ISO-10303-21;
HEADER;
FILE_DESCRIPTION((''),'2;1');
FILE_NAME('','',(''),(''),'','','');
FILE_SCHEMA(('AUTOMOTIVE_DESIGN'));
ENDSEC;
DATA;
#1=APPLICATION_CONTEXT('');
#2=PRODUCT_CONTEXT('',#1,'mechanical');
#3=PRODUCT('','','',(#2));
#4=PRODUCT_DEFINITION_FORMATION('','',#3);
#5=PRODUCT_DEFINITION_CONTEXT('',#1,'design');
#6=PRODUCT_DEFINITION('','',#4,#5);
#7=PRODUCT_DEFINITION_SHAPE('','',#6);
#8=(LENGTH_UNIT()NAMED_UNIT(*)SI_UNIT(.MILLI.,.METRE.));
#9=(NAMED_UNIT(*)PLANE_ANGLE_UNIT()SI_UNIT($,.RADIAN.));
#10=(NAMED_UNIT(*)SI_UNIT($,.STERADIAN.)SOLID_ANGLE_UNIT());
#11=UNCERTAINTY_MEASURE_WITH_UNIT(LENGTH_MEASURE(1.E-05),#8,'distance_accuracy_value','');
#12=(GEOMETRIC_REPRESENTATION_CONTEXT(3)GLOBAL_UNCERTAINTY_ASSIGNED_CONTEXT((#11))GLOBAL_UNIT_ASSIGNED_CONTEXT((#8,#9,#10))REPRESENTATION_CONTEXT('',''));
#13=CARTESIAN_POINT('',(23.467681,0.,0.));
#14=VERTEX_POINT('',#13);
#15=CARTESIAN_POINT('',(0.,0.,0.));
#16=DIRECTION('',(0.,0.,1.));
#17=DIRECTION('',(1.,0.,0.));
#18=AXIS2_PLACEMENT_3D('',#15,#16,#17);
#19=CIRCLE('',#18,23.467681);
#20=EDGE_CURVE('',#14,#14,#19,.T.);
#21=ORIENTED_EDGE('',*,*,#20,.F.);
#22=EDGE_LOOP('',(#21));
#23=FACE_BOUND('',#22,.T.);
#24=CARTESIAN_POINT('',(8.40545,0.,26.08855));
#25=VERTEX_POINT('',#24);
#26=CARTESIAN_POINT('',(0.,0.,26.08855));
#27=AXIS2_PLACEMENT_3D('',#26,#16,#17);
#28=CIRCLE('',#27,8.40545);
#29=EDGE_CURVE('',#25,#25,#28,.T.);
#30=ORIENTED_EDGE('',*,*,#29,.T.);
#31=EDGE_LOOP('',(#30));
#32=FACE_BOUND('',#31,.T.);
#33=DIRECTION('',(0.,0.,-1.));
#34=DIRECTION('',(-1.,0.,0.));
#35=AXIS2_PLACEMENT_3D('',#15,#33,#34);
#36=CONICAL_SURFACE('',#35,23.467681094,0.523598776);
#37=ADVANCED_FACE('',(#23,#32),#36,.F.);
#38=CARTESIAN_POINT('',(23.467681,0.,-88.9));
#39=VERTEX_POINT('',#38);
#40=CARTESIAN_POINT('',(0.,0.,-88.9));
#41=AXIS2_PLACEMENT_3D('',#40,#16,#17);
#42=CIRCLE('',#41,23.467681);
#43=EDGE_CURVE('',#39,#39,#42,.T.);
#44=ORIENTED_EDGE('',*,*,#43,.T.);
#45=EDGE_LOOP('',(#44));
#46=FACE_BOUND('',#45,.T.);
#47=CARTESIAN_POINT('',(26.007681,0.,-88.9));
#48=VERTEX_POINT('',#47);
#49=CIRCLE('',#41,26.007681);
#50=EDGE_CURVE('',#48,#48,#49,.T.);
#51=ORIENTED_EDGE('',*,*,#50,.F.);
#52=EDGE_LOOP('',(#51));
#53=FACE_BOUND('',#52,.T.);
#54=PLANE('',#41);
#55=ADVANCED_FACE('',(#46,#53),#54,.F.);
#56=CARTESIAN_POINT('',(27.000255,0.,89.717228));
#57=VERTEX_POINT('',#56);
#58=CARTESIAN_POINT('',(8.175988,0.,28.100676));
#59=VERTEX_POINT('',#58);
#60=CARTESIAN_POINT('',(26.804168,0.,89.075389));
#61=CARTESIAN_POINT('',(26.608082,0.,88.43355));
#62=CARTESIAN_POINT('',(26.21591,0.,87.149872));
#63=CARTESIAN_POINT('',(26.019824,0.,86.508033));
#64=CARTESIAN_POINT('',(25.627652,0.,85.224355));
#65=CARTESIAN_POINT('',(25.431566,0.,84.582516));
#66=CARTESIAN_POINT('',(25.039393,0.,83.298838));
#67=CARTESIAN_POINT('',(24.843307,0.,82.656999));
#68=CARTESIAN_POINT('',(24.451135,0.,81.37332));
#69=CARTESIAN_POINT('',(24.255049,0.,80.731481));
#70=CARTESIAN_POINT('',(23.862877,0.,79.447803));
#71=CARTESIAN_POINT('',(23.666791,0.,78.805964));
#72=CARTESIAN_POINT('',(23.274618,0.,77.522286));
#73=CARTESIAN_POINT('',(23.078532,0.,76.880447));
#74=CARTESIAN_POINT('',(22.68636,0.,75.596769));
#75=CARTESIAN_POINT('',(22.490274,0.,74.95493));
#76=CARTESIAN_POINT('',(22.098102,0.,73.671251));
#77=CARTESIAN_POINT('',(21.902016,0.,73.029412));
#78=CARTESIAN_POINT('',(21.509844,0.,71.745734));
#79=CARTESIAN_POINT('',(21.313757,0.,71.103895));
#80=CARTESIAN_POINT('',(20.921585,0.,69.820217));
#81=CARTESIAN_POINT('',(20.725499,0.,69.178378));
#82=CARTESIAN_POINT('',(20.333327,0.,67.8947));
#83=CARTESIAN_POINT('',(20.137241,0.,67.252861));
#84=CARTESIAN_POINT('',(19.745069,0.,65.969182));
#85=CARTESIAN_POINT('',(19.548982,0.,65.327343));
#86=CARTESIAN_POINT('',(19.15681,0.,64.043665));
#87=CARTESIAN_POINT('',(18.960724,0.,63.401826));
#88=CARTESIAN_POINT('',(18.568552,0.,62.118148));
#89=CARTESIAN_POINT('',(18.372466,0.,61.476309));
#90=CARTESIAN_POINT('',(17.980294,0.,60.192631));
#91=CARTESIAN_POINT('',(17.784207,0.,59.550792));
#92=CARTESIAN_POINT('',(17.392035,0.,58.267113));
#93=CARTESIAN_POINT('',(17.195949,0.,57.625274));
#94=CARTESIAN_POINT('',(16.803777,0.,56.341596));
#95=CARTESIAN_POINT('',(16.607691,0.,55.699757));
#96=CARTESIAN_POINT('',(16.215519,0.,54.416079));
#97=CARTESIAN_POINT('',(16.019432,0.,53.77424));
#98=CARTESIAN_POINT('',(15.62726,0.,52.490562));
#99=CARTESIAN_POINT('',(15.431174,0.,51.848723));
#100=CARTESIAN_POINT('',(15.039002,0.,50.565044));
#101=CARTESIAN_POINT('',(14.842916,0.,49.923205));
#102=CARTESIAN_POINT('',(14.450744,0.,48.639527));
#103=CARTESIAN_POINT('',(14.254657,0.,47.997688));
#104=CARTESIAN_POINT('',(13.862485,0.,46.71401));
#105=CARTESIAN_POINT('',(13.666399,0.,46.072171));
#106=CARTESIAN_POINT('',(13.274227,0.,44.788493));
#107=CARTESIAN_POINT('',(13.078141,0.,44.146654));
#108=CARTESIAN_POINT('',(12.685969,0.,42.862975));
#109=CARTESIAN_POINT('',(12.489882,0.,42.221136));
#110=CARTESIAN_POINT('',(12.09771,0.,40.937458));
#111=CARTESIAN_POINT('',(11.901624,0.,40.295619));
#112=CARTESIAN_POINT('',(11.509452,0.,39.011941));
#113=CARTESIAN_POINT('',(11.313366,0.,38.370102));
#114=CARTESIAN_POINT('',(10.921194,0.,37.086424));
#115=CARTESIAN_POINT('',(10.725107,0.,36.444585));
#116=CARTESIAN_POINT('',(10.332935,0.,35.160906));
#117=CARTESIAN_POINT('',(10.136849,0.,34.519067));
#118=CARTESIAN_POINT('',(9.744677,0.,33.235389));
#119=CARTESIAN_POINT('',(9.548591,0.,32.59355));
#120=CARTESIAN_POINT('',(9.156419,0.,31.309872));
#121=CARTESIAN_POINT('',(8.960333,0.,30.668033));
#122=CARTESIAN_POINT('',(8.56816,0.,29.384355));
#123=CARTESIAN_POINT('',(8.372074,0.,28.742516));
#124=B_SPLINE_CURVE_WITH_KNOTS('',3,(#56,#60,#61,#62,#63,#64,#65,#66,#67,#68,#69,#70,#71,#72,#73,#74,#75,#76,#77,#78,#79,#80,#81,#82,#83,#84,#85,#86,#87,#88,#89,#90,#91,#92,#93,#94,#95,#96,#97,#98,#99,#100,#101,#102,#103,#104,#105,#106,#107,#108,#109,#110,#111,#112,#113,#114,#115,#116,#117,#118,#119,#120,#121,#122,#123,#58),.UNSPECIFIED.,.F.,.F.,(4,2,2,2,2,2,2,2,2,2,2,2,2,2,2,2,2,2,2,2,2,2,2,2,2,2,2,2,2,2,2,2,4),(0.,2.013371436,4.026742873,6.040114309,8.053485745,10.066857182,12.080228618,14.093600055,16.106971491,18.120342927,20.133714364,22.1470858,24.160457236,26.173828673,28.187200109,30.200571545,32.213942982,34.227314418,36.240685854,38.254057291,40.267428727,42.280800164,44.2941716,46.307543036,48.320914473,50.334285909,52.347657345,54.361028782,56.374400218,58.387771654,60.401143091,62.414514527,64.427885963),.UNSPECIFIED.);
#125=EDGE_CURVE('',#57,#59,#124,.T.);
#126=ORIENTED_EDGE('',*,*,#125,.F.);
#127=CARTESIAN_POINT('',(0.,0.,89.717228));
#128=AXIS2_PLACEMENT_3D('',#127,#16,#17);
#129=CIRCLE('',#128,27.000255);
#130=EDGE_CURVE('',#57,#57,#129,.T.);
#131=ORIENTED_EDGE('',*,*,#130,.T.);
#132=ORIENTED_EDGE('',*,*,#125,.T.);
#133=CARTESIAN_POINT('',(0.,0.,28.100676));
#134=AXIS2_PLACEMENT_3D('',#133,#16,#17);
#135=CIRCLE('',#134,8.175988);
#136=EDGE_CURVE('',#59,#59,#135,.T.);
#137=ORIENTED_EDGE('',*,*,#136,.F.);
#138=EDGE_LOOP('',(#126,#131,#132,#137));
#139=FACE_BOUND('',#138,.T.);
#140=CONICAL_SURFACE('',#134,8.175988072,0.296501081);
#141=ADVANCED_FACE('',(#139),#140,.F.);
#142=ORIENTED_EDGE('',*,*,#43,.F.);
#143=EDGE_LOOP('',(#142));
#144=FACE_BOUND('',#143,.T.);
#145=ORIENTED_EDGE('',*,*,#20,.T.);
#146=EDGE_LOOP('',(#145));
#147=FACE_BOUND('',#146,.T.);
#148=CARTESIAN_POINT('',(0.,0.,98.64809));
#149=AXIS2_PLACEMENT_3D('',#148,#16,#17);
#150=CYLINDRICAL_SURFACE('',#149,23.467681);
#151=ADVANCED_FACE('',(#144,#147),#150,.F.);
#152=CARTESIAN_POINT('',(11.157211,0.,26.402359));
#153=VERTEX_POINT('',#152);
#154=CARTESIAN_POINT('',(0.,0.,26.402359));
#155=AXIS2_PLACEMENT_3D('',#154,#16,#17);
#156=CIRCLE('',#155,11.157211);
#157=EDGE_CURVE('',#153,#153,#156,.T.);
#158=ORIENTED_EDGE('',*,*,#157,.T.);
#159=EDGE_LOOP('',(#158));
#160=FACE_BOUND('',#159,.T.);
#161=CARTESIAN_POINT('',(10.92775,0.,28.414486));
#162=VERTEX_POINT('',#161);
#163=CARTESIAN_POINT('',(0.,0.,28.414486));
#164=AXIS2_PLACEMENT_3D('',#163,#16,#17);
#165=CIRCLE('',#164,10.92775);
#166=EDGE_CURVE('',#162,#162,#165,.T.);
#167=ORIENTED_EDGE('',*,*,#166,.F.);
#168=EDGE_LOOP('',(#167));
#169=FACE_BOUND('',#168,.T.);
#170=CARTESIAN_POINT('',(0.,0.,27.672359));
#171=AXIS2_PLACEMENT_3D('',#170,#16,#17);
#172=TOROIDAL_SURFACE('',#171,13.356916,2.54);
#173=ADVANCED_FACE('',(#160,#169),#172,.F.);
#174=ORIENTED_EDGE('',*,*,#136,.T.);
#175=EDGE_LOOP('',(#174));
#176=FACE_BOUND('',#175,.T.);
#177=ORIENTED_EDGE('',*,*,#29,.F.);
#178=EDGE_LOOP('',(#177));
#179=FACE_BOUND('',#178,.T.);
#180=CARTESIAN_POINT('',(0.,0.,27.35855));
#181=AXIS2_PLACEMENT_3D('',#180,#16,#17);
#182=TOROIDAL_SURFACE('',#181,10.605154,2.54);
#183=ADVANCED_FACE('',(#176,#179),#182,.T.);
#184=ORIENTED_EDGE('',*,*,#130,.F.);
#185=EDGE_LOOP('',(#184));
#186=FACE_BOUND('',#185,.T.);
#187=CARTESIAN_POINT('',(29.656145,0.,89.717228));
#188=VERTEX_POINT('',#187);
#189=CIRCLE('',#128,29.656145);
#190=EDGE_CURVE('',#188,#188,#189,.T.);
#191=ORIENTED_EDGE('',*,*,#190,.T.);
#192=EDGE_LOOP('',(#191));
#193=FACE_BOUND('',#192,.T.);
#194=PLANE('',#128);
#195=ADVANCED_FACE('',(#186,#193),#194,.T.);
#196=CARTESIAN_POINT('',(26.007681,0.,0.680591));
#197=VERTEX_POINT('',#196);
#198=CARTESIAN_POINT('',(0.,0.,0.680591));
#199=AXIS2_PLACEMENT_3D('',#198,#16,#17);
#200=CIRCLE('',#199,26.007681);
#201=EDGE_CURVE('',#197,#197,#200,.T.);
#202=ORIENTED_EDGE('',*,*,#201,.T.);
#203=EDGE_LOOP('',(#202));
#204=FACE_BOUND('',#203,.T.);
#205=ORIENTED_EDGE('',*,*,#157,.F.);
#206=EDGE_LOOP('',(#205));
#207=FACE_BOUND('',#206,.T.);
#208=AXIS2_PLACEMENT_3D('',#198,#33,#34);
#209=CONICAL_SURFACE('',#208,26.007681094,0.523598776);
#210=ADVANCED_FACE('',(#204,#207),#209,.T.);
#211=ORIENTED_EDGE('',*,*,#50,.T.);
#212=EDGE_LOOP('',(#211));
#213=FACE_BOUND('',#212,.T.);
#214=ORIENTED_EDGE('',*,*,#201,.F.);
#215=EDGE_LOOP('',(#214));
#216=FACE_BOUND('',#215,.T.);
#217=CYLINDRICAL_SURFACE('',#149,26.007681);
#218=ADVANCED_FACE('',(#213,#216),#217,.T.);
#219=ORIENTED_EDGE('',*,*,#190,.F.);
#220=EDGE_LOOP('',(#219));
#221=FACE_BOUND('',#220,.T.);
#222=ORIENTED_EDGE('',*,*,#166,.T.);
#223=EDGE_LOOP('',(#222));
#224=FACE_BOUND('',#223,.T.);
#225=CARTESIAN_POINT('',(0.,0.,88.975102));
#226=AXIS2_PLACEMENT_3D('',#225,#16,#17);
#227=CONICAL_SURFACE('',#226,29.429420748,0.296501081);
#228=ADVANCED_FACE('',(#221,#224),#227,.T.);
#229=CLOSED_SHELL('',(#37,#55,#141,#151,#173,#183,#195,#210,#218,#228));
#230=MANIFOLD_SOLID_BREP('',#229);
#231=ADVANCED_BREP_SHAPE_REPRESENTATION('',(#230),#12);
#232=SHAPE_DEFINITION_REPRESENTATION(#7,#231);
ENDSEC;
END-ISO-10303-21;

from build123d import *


# Read off the part's stored shape, not the designer's step: Revolve4
with BuildPart() as part:
    # Sketch2 → Revolve1 (revolve)
    with BuildSketch(Plane(origin=(0, 0, 0), x_dir=(1, 0, 0), z_dir=(0, 1, 0)), mode=Mode.PRIVATE) as revolve1_sk:
        with BuildLine():
            Line((0, 88.9), (-23.467681094, 88.9))
            Line((-23.467681094, 88.9), (-23.467681094, 0))
            Line((-23.467681094, 0), (-8.405449734, -26.088549992))
            ThreePointArc((-8.405449734, -26.088549992), (-8.081511216, -27.07075529), (-8.175988072, -28.10067642))
            Line((-8.175988072, -28.10067642), (-27.000254561, -89.717228424))
            Line((-27.000254561, -89.717228424), (0, -89.717228424))
            Line((0, -89.717228424), (0, 88.9))
        make_face()
    revolve(revolve1_sk.sketch.rotate(Axis((0, 0, 0), (0, 0, -1)), 180), axis=Axis((0, 0, 0), (0, 0, -1)))

    # Revolve4 outline → Revolve4 (revolve)
    with BuildSketch(Plane.XZ):
        with BuildLine():
            Line((23.467681094, -88.9), (26.007681094, -88.9))
            Line((26.007681094, -88.9), (26.007681094, 0.680590949))
            Line((26.007681094, 0.680590949), (11.157211277, 26.402359187))
            ThreePointArc((11.157211277, 26.402359187), (10.83327276, 27.384564486), (10.927749616, 28.414485616))
            Line((10.927749616, 28.414485616), (29.656145308, 89.717228424))
            Line((29.656145308, 89.717228424), (27.000254561, 89.717228424))
            Line((27.000254561, 89.717228424), (8.175988072, 28.10067642))
            ThreePointArc((8.175988072, 28.10067642), (8.081511216, 27.07075529), (8.405449734, 26.088549992))
            Line((8.405449734, 26.088549992), (23.467681094, 0))
            Line((23.467681094, 0), (23.467681094, -88.9))
        make_face()
    revolve(axis=Axis((0, 0, 0), (0, 0, 1)))

    # Sketch6 → Cut-Revolve2 (revolve, cut)
    with BuildSketch(Plane(origin=(0, 0, 0), x_dir=(1, 0, 0), z_dir=(0, 1, 0)), mode=Mode.PRIVATE) as cut_revolve2_sk:
        with BuildLine():
            Line((0, 88.9), (-23.467681094, 88.9))
            Line((-23.467681094, 88.9), (-23.467681094, 0))
            Line((-23.467681094, 0), (-8.405449734, -26.088549992))
            ThreePointArc((-8.405449734, -26.088549992), (-8.081511216, -27.07075529), (-8.175988072, -28.10067642))
            Line((-8.175988072, -28.10067642), (-27.000254561, -89.717228424))
            Line((-27.000254561, -89.717228424), (0, -89.717228424))
            Line((0, -89.717228424), (0, 88.9))
        make_face()
    revolve(cut_revolve2_sk.sketch.rotate(Axis((0, 0, 98.648089845), (0, 0, -1)), 180), axis=Axis((0, 0, 98.648089845), (0, 0, -1)), mode=Mode.SUBTRACT)


solid = part.part
